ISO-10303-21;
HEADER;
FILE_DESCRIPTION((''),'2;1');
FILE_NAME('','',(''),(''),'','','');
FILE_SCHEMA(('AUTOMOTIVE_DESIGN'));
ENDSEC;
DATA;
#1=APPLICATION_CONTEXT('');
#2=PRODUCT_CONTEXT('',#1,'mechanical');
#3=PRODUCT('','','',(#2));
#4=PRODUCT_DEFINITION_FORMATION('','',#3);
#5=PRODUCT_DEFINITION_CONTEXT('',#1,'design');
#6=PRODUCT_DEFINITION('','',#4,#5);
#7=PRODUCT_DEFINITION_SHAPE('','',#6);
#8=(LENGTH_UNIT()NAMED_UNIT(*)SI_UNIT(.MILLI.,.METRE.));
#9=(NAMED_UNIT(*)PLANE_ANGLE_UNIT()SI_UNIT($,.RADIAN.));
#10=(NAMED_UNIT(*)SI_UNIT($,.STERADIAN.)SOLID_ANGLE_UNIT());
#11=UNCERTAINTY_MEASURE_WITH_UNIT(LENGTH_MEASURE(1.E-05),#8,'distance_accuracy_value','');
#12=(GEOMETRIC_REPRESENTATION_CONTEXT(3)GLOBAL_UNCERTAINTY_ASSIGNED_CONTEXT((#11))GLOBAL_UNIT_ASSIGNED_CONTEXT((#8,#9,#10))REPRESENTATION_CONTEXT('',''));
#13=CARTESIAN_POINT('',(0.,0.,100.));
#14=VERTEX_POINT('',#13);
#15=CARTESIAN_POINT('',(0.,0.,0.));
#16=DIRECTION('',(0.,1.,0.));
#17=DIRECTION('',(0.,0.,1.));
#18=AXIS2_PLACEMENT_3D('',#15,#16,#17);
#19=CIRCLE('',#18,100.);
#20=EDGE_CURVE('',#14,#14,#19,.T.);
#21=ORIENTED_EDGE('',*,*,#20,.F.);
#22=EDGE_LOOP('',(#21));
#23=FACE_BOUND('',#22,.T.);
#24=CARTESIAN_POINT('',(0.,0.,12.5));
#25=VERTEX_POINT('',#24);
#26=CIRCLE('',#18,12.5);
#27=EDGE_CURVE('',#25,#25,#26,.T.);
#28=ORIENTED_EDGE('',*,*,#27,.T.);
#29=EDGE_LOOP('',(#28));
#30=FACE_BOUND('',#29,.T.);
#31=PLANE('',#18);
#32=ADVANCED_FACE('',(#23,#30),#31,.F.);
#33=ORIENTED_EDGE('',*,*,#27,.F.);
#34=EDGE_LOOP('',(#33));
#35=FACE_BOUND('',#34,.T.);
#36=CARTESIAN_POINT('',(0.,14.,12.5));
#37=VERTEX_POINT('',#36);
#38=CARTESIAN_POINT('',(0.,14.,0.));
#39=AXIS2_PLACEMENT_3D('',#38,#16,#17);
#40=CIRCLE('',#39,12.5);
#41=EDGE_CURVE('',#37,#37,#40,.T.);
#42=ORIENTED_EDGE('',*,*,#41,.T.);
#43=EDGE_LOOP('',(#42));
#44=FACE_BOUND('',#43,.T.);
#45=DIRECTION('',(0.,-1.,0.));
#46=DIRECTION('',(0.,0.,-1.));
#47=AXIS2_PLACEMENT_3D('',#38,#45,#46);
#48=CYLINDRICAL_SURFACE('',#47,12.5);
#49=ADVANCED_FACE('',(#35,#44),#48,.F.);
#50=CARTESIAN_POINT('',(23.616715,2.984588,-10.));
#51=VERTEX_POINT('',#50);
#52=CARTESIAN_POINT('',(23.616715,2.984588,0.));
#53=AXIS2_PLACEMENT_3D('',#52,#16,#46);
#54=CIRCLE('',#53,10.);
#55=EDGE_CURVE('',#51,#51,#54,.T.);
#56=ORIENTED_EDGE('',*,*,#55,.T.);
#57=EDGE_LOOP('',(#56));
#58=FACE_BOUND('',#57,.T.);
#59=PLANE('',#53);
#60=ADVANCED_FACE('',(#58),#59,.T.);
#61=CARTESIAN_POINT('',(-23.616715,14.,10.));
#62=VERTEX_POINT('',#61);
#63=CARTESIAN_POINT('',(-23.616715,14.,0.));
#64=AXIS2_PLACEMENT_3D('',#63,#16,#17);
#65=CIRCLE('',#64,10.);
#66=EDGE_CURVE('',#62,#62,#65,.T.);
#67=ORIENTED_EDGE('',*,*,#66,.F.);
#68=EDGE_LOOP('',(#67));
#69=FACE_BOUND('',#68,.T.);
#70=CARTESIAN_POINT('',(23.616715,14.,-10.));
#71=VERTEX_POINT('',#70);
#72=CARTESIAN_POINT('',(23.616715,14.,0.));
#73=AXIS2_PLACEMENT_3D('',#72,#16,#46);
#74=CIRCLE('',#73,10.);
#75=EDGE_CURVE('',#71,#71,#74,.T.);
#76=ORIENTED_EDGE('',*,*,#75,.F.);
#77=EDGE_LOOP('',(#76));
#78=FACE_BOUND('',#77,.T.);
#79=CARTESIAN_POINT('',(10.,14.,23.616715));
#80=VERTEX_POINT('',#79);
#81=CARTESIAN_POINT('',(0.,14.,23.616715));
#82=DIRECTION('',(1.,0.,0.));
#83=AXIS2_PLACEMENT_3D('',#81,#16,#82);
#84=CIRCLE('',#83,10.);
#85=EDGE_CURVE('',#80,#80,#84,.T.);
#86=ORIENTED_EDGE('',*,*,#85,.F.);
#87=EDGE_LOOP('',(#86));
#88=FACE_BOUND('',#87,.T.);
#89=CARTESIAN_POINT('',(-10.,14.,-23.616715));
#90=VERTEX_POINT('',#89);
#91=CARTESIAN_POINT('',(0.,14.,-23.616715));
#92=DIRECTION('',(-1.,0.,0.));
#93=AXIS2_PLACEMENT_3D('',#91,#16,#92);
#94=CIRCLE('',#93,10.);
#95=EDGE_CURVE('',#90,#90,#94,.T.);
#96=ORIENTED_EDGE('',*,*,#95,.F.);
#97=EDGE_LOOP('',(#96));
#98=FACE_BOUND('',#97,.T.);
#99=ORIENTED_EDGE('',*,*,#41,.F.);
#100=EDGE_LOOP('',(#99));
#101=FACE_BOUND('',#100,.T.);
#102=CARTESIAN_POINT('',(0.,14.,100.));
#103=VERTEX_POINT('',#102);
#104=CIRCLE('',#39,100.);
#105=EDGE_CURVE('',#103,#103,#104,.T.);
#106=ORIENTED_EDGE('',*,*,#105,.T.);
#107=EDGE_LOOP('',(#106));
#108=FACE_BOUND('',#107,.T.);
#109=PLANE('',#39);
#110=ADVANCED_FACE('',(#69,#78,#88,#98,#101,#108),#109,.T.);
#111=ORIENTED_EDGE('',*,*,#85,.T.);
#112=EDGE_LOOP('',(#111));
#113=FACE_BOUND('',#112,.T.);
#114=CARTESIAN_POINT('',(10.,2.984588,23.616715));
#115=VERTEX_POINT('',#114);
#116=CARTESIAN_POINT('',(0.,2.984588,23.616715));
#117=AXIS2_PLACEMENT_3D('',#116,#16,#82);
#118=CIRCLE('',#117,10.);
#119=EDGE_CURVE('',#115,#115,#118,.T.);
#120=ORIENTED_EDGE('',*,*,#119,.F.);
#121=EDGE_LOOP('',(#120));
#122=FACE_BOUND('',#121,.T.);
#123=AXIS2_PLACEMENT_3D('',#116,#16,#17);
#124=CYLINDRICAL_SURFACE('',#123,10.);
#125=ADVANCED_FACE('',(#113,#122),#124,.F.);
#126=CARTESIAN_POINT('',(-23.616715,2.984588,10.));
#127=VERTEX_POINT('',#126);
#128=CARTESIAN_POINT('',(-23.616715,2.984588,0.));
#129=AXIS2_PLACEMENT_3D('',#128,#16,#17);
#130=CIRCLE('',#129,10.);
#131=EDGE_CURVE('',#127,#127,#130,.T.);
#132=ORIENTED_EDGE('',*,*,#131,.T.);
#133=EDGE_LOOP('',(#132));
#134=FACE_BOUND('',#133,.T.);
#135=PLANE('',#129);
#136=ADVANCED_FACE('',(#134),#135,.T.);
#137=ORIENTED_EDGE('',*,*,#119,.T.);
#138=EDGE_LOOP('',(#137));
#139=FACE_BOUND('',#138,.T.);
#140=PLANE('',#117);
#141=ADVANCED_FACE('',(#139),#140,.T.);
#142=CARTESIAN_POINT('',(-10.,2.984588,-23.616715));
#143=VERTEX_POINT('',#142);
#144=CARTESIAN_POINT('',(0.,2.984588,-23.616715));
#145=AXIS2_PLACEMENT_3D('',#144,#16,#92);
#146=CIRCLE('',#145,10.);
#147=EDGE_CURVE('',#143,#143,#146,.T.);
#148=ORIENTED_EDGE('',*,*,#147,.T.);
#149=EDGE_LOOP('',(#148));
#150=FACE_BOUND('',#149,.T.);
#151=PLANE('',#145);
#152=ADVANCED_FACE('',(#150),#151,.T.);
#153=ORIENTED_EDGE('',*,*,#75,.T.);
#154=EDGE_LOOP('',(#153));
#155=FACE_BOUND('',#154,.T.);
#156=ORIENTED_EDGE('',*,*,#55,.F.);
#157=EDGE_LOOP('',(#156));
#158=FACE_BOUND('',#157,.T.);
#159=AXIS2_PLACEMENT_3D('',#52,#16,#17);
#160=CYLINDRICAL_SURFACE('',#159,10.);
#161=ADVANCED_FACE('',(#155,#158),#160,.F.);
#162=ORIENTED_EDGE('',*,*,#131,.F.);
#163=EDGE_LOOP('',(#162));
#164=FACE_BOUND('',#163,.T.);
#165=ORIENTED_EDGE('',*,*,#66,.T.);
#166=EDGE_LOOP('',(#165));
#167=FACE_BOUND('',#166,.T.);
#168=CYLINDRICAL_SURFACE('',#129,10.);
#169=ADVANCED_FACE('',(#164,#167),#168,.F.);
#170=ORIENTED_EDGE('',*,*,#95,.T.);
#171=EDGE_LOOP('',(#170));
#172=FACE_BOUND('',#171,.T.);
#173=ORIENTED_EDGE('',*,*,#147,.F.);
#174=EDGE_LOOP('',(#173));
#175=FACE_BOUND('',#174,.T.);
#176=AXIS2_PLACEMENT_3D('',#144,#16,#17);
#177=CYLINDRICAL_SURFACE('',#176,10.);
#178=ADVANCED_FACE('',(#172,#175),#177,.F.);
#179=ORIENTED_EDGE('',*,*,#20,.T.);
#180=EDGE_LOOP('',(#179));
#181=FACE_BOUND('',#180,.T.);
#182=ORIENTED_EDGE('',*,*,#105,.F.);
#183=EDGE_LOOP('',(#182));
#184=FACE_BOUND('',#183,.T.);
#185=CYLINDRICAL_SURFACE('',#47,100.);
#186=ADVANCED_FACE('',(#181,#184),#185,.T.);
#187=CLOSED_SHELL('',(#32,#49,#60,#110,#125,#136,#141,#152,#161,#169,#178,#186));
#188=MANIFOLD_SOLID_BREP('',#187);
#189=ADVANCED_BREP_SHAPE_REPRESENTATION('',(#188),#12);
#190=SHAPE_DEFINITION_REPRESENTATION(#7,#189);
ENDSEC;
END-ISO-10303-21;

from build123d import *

# Parameters (mm, degrees)
SKETCH1_R           = 100
BOSS_EXTRUDE1_DEPTH = 14
SKETCH2_R           = 12.5
CUT_EXTRUDE1_DEPTH  = 143.112631388
SKETCH3_R           = 10
CUT_EXTRUDE2_DEPTH  = 11.015412359
CIRPATTERN1_COUNT   = 4


with BuildPart() as part:
    # Sketch1 → Boss-Extrude1 (new body)
    with BuildSketch(Plane(origin=(0, 0, 0), x_dir=(1, 0, 0), z_dir=(0, 1, 0))):
        Circle(SKETCH1_R)
    extrude(amount=BOSS_EXTRUDE1_DEPTH)

    # Sketch2 → Cut-Extrude1 (cut, through all)
    with BuildSketch(Plane(origin=(0, 0, 0), x_dir=(1, 0, 0), z_dir=(0, 1, 0))):
        Circle(SKETCH2_R)
    extrude(amount=CUT_EXTRUDE1_DEPTH, mode=Mode.SUBTRACT)

    # Sketch3 → Cut-Extrude2 (cut)
    with BuildSketch(Plane(origin=(0, 14, 0), x_dir=(1, 0, 0), z_dir=(0, 1, 0))):
        with Locations((-23.616715223, 0)):
            Circle(SKETCH3_R)
    cut_extrude2 = extrude(amount=-CUT_EXTRUDE2_DEPTH, mode=Mode.SUBTRACT)

    # CirPattern1: Cut-Extrude2 ×4 about axis
    cirpattern1_axis = Axis((0, 0, 0), (0, 1, 0))
    for i in range(1, CIRPATTERN1_COUNT):
        add(cut_extrude2.rotate(cirpattern1_axis, i * 360 / CIRPATTERN1_COUNT), mode=Mode.SUBTRACT)


solid = part.part
